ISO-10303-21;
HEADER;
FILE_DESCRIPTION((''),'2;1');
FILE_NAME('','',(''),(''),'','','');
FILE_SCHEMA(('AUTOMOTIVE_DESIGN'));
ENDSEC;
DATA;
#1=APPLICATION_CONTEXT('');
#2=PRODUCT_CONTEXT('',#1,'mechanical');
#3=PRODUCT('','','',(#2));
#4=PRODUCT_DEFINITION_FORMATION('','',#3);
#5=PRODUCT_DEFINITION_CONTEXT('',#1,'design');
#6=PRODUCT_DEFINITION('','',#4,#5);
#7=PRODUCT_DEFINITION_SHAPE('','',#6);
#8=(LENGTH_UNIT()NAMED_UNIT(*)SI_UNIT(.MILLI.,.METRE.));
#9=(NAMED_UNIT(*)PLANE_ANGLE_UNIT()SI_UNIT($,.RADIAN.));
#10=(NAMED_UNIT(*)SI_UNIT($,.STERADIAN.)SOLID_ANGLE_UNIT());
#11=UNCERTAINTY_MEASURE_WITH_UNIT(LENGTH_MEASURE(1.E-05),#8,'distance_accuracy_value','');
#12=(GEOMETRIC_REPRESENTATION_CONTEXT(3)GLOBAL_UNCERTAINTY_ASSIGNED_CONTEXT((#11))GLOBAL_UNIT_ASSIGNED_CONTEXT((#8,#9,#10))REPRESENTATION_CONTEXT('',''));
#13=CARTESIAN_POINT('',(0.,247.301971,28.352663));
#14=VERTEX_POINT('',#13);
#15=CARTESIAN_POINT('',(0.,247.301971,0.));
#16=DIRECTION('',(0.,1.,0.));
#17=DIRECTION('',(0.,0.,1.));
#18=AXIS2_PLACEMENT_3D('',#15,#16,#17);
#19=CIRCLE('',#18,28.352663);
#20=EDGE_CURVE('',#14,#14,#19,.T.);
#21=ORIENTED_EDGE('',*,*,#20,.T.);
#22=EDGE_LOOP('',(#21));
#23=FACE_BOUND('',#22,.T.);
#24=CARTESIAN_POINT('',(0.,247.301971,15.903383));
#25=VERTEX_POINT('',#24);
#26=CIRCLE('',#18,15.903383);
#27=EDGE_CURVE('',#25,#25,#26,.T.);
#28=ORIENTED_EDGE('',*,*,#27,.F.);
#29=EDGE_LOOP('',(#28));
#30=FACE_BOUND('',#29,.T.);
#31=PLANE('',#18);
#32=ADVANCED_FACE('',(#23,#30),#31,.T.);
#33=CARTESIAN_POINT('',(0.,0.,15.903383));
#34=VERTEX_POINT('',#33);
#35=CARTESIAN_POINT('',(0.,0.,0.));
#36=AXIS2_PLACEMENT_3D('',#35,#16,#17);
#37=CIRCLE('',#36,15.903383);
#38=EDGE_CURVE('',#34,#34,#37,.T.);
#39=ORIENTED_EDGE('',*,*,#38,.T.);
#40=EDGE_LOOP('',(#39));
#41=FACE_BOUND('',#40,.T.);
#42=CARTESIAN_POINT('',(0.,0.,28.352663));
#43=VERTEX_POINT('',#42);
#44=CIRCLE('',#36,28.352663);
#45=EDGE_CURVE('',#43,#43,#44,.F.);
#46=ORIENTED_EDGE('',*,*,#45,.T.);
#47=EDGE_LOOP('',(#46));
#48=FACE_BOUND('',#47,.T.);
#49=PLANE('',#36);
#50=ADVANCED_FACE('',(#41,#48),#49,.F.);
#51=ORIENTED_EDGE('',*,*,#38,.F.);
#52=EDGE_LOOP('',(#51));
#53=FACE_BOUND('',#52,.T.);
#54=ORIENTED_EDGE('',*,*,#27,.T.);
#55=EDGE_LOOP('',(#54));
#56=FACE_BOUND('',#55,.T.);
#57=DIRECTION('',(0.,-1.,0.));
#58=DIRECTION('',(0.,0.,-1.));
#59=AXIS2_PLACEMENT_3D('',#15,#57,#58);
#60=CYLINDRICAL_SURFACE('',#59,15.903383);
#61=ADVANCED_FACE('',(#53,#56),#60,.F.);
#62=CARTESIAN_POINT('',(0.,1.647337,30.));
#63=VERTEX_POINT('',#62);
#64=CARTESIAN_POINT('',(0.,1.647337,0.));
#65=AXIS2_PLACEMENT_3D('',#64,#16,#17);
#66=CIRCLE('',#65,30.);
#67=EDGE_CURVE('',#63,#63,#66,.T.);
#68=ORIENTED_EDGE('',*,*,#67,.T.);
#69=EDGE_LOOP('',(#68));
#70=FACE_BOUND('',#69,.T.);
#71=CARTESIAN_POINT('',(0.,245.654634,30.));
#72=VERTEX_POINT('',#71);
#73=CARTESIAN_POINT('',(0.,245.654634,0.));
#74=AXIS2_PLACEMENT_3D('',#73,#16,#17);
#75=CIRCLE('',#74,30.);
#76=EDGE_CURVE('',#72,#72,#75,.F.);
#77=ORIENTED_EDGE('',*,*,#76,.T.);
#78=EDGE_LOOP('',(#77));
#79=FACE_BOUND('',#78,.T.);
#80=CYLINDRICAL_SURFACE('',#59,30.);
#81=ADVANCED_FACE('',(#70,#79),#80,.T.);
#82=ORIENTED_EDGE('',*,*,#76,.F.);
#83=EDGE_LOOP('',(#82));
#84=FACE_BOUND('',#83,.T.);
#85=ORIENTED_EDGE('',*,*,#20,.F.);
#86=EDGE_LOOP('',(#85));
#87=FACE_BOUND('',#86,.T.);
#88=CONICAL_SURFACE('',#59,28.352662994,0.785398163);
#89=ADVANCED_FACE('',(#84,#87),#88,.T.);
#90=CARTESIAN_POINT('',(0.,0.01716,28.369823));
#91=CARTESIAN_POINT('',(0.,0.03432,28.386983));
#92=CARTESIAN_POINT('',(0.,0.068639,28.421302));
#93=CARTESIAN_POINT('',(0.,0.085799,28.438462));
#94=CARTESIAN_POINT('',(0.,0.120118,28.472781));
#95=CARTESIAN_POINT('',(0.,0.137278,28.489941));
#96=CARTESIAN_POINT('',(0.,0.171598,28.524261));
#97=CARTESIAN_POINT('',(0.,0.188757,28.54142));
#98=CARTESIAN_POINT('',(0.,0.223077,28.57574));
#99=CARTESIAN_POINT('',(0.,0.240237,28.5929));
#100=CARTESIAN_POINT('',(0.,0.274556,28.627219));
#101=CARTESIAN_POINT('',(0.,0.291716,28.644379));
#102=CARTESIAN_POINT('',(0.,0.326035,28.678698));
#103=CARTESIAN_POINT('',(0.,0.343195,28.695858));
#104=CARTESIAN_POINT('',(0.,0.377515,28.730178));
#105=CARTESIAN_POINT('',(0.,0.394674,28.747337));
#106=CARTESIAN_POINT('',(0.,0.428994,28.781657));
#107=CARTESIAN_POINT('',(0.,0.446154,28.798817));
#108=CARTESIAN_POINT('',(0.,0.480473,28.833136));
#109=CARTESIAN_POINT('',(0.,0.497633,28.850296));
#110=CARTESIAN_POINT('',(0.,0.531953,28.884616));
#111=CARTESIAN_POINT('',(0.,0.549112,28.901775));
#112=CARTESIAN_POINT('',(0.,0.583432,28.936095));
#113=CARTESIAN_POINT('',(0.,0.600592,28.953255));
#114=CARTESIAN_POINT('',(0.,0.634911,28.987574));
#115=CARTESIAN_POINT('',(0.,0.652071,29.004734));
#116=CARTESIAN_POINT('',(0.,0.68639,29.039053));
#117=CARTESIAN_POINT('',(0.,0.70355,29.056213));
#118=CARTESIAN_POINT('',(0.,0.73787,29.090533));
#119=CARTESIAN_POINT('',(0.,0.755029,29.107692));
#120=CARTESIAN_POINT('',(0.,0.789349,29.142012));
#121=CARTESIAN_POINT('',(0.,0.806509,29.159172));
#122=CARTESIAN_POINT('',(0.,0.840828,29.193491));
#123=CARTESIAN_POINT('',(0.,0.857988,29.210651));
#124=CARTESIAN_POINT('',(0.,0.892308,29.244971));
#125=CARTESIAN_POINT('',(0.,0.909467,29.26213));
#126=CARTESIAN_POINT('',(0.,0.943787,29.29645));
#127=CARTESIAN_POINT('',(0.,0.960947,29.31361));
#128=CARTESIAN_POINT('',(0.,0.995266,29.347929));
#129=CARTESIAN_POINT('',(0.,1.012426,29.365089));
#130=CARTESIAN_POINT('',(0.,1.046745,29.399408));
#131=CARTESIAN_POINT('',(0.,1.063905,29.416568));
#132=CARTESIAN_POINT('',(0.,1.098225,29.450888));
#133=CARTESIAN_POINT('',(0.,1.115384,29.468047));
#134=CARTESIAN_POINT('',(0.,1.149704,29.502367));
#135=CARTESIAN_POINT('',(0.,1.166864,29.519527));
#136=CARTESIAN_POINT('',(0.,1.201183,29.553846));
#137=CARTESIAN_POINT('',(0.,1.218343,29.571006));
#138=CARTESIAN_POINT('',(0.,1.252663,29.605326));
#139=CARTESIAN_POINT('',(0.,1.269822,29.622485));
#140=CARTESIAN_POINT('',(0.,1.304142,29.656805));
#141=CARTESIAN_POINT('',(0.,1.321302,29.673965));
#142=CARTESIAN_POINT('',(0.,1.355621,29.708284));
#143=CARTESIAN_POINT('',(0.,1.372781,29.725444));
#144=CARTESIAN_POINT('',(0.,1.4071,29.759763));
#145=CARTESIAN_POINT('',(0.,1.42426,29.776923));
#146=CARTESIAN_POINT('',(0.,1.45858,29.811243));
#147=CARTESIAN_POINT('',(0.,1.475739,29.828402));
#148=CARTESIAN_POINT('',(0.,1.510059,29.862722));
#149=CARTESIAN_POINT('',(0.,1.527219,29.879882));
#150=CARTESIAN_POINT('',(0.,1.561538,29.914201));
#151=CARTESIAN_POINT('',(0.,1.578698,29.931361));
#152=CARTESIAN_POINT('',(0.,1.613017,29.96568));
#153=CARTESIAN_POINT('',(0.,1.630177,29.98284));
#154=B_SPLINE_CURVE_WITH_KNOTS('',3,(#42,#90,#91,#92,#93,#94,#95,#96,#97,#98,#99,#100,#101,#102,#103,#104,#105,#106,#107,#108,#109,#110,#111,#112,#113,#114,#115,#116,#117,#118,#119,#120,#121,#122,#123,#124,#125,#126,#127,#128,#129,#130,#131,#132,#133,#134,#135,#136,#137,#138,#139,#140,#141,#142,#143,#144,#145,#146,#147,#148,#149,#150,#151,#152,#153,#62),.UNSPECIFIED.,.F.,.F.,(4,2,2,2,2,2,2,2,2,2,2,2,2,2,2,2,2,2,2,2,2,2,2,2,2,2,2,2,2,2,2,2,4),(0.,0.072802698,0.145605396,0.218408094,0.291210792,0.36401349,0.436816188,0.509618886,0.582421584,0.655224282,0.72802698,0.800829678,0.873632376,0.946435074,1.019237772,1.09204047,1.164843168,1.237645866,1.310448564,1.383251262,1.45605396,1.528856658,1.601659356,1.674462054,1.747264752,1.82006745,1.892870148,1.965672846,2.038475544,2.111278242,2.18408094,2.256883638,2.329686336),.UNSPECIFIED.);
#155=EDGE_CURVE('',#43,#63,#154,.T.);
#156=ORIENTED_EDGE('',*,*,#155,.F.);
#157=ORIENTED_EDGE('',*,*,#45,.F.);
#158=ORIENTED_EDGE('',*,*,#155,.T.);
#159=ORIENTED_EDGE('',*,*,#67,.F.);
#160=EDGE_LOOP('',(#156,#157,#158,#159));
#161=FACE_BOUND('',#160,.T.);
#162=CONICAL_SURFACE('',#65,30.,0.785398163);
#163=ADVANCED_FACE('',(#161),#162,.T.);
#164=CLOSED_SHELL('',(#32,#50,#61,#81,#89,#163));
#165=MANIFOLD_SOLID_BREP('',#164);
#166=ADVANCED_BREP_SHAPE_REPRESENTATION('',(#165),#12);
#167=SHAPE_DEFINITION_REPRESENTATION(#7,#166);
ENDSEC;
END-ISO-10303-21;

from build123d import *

# Parameters (mm, degrees)
SKETCH1_R           = 30
BOSS_EXTRUDE1_DEPTH = 247.30197147
SKETCH2_R           = 15.903382893
CUT_EXTRUDE1_DEPTH  = 251.914856262
CHAMFER1_SIZE       = 1.647337006


with BuildPart() as part:
    # Sketch1 → Boss-Extrude1 (new body)
    with BuildSketch(Plane(origin=(0, 0, 0), x_dir=(1, 0, 0), z_dir=(0, 1, 0))):
        Circle(SKETCH1_R)
    extrude(amount=BOSS_EXTRUDE1_DEPTH)

    # Sketch2 → Cut-Extrude1 (cut, through all)
    with BuildSketch(Plane(origin=(0, 0, 0), x_dir=(1, 0, 0), z_dir=(0, 1, 0))):
        Circle(SKETCH2_R)
    extrude(amount=CUT_EXTRUDE1_DEPTH, mode=Mode.SUBTRACT)

    # Chamfer1
    chamfer1_edges = [part.edges().sort_by_distance(p)[0] for p in [
        (-30, 247.30197147, 0),
        (-30, 0, 0),
    ]]
    chamfer(chamfer1_edges, length=CHAMFER1_SIZE)


solid = part.part
